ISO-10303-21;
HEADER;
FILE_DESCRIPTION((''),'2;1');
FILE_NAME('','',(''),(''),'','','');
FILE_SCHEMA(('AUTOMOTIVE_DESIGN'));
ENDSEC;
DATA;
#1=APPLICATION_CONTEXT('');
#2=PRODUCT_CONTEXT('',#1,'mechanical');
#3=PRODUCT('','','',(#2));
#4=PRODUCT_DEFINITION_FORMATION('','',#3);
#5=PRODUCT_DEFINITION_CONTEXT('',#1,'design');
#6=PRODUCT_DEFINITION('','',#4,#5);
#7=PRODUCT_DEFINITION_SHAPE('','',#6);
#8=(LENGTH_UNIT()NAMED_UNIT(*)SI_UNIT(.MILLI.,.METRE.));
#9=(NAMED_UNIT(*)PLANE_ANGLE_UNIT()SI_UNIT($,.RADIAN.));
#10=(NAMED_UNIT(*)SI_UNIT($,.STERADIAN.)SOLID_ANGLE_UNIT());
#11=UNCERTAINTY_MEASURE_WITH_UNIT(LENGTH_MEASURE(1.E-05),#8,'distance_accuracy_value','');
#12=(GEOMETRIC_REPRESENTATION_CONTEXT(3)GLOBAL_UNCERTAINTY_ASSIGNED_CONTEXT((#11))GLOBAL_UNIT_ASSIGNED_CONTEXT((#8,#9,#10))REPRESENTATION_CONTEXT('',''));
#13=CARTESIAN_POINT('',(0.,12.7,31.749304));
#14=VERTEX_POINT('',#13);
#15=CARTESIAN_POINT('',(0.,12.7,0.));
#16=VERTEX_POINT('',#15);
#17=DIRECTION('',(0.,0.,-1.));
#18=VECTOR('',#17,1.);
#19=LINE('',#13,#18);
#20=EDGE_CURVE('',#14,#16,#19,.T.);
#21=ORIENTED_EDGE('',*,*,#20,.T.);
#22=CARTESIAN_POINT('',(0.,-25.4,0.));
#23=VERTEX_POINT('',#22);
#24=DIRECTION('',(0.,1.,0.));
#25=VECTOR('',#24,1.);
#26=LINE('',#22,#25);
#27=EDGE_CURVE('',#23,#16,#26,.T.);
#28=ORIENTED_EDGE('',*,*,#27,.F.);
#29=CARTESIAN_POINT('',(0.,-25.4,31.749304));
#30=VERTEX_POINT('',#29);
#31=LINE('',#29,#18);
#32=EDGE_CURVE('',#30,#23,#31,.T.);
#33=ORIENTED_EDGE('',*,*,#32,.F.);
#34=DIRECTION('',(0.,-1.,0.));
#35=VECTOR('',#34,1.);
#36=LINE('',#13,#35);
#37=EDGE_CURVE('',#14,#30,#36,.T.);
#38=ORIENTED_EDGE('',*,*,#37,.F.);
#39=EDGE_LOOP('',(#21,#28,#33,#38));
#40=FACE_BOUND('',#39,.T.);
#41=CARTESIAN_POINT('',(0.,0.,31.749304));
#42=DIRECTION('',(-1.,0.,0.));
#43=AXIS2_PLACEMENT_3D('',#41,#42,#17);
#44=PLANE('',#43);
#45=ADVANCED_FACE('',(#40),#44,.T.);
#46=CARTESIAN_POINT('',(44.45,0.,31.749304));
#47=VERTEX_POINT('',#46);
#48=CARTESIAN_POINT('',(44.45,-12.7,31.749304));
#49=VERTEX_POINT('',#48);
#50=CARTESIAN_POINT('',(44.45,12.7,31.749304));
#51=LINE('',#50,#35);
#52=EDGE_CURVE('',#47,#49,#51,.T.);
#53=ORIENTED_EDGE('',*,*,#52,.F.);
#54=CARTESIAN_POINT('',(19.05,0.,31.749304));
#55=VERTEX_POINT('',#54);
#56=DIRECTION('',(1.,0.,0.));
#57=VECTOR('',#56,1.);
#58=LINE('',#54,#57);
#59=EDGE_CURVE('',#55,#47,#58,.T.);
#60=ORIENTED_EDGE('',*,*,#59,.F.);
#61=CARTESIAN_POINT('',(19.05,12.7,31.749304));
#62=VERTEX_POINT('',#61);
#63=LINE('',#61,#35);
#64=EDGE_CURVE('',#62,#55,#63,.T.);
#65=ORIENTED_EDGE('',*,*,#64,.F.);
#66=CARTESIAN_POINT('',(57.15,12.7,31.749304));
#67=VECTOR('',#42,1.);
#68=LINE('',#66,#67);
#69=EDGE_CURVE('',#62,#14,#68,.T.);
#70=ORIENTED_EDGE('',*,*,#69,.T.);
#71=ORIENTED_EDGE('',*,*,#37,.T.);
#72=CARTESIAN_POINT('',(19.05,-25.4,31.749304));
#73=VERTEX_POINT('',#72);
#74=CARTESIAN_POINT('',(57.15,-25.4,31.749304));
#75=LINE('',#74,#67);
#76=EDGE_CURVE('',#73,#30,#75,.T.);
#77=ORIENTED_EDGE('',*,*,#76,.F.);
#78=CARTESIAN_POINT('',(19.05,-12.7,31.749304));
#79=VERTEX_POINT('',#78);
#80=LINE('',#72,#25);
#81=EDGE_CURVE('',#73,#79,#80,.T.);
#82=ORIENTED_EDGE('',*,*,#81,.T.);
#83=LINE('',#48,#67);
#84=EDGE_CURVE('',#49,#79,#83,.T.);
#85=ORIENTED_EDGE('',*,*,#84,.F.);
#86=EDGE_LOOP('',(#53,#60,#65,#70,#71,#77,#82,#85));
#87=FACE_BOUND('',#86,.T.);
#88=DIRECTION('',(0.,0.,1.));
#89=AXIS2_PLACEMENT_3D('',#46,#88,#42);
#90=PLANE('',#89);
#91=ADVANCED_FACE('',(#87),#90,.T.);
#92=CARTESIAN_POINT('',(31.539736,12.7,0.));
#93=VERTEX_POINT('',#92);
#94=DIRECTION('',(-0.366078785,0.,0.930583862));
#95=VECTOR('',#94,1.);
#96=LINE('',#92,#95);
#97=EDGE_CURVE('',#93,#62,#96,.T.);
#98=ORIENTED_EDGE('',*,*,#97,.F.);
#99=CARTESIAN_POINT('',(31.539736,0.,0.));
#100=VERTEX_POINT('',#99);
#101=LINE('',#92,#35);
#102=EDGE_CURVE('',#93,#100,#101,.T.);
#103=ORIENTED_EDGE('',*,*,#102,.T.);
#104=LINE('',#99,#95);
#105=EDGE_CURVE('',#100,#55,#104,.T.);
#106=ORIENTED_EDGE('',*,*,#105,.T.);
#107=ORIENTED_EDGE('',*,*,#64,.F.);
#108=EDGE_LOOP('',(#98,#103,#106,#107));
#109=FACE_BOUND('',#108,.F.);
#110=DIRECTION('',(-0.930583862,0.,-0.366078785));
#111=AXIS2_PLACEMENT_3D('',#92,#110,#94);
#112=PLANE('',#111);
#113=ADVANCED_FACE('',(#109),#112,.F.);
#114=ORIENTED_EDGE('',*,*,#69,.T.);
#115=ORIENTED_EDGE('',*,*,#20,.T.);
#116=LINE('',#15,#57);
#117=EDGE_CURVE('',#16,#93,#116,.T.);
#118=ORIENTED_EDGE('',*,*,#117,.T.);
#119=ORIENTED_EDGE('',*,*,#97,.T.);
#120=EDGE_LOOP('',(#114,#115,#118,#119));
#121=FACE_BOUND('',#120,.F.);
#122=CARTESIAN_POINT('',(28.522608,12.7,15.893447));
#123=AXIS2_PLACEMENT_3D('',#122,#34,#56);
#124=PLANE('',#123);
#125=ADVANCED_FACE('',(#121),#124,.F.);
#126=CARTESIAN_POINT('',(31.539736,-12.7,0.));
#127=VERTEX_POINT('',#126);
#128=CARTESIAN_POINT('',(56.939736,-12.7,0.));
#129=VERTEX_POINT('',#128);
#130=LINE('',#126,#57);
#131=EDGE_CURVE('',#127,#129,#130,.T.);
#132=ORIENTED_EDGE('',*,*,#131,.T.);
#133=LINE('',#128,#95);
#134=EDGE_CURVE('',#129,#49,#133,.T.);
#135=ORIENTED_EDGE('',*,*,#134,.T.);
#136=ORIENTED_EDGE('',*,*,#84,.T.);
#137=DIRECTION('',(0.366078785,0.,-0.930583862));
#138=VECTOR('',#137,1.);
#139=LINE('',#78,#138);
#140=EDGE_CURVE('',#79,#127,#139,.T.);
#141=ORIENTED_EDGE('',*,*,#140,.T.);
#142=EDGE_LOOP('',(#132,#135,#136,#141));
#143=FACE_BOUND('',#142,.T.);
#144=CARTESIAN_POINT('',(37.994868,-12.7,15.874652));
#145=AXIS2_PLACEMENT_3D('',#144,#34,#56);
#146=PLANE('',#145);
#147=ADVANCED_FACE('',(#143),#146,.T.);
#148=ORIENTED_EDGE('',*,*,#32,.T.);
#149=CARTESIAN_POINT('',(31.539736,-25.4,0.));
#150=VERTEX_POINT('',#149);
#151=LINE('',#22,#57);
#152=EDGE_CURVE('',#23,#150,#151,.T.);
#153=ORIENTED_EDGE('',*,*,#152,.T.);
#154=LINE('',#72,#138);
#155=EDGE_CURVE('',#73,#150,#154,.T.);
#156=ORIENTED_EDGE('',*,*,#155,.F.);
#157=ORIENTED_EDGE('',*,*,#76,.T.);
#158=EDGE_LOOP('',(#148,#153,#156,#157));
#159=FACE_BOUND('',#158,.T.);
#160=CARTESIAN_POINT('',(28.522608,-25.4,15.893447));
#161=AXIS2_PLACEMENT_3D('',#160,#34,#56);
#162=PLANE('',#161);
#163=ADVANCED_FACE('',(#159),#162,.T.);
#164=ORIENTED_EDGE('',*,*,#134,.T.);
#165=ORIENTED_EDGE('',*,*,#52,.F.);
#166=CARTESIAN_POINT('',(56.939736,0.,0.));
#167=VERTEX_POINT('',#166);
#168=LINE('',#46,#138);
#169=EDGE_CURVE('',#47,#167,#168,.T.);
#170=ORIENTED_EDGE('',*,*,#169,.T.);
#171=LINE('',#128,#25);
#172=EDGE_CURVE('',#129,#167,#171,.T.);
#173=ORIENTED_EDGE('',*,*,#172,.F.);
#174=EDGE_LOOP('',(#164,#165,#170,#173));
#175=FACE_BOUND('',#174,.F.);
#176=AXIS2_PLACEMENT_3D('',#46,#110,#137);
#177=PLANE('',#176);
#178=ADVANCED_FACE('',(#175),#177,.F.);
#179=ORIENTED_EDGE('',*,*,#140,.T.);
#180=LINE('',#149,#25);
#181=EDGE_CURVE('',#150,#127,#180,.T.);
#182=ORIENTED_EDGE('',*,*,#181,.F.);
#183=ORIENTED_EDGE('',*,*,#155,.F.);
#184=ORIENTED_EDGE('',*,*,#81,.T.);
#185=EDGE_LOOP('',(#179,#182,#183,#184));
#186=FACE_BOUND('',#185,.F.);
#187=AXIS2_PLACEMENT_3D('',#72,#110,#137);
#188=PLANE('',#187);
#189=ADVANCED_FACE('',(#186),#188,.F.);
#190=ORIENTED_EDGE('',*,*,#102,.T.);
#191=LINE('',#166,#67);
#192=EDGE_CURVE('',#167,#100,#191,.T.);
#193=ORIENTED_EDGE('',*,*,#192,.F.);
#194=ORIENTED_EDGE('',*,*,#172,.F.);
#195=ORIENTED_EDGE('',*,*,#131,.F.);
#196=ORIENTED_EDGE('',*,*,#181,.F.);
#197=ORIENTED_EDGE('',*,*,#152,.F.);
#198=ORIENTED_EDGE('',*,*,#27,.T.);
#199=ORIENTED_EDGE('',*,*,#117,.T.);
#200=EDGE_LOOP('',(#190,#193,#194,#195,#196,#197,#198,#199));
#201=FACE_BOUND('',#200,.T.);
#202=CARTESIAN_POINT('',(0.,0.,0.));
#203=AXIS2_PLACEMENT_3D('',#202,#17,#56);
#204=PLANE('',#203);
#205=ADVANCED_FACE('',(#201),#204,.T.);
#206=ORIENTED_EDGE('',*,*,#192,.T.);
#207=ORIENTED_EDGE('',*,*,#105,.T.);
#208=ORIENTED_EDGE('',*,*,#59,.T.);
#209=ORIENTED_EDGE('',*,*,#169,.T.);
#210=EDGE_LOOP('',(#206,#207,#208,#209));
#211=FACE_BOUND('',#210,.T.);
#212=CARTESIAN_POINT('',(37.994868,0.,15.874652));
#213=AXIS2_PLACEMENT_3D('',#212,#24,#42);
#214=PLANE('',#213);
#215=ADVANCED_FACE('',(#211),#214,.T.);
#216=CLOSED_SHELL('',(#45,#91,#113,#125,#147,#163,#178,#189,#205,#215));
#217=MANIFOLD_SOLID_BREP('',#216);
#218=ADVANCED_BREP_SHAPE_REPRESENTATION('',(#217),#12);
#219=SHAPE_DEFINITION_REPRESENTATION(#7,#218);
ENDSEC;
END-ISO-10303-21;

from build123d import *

# Parameters (mm, degrees)
F1_DEPTH = 25.4
F3_DEPTH = 38.1
F5_DEPTH = 12.7
F6_DEPTH = 12.7
F8_DEPTH = 12.7


# Not quite as in the source:
# - a length typed as a fraction of an inch, garbled in the dataset ("3 / 203.2 mm" for 3/8 in), is restored


with BuildPart() as f1:
    # F0 (on Front) → F1 (new body)
    with BuildSketch(Plane.XZ):
        Polygon((57.15, 31.7493037554), (0, 31.7493037554), (0, 0), (56.9397357658, 0), align=None)
    extrude(amount=F1_DEPTH)

    # F2 (on face) → F3 (cut)
    with BuildSketch(Plane.XZ.offset(25.4)):
        Polygon((44.45, 31.7493037554), (56.9397357658, 0), (57.15, 31.7493037554), align=None)
    extrude(amount=-F3_DEPTH, mode=Mode.SUBTRACT)

    # F4 (on face) → F5 (cut)
    with BuildSketch(Plane.XZ.offset(25.4)):
        Polygon((44.45, 31.7493037554), (19.05, 31.7493037554), (31.5397357658, 0), (56.9397357658, 0), align=None)
    extrude(amount=-F5_DEPTH, mode=Mode.SUBTRACT)

    # F6 (add): a face of the model
    f6_faces = [f1.faces().sort_by_distance(p)[0] for p in [
        (25.4756467057, 0, 15.2228100654),
    ]]
    extrude(f6_faces, amount=F6_DEPTH)

    # F7 (on face) → F8 (cut)
    with BuildSketch(Plane(origin=(0, 12.7, 0), x_dir=(-1, 0, 0), z_dir=(0, 1, 0))):
        Polygon((-56.9397357658, 0), (-31.5397357658, 0), (-19.05, 31.7493037554), (-44.45, 31.7493037554), align=None)
    extrude(amount=-F8_DEPTH, mode=Mode.SUBTRACT)


solid = f1.part
